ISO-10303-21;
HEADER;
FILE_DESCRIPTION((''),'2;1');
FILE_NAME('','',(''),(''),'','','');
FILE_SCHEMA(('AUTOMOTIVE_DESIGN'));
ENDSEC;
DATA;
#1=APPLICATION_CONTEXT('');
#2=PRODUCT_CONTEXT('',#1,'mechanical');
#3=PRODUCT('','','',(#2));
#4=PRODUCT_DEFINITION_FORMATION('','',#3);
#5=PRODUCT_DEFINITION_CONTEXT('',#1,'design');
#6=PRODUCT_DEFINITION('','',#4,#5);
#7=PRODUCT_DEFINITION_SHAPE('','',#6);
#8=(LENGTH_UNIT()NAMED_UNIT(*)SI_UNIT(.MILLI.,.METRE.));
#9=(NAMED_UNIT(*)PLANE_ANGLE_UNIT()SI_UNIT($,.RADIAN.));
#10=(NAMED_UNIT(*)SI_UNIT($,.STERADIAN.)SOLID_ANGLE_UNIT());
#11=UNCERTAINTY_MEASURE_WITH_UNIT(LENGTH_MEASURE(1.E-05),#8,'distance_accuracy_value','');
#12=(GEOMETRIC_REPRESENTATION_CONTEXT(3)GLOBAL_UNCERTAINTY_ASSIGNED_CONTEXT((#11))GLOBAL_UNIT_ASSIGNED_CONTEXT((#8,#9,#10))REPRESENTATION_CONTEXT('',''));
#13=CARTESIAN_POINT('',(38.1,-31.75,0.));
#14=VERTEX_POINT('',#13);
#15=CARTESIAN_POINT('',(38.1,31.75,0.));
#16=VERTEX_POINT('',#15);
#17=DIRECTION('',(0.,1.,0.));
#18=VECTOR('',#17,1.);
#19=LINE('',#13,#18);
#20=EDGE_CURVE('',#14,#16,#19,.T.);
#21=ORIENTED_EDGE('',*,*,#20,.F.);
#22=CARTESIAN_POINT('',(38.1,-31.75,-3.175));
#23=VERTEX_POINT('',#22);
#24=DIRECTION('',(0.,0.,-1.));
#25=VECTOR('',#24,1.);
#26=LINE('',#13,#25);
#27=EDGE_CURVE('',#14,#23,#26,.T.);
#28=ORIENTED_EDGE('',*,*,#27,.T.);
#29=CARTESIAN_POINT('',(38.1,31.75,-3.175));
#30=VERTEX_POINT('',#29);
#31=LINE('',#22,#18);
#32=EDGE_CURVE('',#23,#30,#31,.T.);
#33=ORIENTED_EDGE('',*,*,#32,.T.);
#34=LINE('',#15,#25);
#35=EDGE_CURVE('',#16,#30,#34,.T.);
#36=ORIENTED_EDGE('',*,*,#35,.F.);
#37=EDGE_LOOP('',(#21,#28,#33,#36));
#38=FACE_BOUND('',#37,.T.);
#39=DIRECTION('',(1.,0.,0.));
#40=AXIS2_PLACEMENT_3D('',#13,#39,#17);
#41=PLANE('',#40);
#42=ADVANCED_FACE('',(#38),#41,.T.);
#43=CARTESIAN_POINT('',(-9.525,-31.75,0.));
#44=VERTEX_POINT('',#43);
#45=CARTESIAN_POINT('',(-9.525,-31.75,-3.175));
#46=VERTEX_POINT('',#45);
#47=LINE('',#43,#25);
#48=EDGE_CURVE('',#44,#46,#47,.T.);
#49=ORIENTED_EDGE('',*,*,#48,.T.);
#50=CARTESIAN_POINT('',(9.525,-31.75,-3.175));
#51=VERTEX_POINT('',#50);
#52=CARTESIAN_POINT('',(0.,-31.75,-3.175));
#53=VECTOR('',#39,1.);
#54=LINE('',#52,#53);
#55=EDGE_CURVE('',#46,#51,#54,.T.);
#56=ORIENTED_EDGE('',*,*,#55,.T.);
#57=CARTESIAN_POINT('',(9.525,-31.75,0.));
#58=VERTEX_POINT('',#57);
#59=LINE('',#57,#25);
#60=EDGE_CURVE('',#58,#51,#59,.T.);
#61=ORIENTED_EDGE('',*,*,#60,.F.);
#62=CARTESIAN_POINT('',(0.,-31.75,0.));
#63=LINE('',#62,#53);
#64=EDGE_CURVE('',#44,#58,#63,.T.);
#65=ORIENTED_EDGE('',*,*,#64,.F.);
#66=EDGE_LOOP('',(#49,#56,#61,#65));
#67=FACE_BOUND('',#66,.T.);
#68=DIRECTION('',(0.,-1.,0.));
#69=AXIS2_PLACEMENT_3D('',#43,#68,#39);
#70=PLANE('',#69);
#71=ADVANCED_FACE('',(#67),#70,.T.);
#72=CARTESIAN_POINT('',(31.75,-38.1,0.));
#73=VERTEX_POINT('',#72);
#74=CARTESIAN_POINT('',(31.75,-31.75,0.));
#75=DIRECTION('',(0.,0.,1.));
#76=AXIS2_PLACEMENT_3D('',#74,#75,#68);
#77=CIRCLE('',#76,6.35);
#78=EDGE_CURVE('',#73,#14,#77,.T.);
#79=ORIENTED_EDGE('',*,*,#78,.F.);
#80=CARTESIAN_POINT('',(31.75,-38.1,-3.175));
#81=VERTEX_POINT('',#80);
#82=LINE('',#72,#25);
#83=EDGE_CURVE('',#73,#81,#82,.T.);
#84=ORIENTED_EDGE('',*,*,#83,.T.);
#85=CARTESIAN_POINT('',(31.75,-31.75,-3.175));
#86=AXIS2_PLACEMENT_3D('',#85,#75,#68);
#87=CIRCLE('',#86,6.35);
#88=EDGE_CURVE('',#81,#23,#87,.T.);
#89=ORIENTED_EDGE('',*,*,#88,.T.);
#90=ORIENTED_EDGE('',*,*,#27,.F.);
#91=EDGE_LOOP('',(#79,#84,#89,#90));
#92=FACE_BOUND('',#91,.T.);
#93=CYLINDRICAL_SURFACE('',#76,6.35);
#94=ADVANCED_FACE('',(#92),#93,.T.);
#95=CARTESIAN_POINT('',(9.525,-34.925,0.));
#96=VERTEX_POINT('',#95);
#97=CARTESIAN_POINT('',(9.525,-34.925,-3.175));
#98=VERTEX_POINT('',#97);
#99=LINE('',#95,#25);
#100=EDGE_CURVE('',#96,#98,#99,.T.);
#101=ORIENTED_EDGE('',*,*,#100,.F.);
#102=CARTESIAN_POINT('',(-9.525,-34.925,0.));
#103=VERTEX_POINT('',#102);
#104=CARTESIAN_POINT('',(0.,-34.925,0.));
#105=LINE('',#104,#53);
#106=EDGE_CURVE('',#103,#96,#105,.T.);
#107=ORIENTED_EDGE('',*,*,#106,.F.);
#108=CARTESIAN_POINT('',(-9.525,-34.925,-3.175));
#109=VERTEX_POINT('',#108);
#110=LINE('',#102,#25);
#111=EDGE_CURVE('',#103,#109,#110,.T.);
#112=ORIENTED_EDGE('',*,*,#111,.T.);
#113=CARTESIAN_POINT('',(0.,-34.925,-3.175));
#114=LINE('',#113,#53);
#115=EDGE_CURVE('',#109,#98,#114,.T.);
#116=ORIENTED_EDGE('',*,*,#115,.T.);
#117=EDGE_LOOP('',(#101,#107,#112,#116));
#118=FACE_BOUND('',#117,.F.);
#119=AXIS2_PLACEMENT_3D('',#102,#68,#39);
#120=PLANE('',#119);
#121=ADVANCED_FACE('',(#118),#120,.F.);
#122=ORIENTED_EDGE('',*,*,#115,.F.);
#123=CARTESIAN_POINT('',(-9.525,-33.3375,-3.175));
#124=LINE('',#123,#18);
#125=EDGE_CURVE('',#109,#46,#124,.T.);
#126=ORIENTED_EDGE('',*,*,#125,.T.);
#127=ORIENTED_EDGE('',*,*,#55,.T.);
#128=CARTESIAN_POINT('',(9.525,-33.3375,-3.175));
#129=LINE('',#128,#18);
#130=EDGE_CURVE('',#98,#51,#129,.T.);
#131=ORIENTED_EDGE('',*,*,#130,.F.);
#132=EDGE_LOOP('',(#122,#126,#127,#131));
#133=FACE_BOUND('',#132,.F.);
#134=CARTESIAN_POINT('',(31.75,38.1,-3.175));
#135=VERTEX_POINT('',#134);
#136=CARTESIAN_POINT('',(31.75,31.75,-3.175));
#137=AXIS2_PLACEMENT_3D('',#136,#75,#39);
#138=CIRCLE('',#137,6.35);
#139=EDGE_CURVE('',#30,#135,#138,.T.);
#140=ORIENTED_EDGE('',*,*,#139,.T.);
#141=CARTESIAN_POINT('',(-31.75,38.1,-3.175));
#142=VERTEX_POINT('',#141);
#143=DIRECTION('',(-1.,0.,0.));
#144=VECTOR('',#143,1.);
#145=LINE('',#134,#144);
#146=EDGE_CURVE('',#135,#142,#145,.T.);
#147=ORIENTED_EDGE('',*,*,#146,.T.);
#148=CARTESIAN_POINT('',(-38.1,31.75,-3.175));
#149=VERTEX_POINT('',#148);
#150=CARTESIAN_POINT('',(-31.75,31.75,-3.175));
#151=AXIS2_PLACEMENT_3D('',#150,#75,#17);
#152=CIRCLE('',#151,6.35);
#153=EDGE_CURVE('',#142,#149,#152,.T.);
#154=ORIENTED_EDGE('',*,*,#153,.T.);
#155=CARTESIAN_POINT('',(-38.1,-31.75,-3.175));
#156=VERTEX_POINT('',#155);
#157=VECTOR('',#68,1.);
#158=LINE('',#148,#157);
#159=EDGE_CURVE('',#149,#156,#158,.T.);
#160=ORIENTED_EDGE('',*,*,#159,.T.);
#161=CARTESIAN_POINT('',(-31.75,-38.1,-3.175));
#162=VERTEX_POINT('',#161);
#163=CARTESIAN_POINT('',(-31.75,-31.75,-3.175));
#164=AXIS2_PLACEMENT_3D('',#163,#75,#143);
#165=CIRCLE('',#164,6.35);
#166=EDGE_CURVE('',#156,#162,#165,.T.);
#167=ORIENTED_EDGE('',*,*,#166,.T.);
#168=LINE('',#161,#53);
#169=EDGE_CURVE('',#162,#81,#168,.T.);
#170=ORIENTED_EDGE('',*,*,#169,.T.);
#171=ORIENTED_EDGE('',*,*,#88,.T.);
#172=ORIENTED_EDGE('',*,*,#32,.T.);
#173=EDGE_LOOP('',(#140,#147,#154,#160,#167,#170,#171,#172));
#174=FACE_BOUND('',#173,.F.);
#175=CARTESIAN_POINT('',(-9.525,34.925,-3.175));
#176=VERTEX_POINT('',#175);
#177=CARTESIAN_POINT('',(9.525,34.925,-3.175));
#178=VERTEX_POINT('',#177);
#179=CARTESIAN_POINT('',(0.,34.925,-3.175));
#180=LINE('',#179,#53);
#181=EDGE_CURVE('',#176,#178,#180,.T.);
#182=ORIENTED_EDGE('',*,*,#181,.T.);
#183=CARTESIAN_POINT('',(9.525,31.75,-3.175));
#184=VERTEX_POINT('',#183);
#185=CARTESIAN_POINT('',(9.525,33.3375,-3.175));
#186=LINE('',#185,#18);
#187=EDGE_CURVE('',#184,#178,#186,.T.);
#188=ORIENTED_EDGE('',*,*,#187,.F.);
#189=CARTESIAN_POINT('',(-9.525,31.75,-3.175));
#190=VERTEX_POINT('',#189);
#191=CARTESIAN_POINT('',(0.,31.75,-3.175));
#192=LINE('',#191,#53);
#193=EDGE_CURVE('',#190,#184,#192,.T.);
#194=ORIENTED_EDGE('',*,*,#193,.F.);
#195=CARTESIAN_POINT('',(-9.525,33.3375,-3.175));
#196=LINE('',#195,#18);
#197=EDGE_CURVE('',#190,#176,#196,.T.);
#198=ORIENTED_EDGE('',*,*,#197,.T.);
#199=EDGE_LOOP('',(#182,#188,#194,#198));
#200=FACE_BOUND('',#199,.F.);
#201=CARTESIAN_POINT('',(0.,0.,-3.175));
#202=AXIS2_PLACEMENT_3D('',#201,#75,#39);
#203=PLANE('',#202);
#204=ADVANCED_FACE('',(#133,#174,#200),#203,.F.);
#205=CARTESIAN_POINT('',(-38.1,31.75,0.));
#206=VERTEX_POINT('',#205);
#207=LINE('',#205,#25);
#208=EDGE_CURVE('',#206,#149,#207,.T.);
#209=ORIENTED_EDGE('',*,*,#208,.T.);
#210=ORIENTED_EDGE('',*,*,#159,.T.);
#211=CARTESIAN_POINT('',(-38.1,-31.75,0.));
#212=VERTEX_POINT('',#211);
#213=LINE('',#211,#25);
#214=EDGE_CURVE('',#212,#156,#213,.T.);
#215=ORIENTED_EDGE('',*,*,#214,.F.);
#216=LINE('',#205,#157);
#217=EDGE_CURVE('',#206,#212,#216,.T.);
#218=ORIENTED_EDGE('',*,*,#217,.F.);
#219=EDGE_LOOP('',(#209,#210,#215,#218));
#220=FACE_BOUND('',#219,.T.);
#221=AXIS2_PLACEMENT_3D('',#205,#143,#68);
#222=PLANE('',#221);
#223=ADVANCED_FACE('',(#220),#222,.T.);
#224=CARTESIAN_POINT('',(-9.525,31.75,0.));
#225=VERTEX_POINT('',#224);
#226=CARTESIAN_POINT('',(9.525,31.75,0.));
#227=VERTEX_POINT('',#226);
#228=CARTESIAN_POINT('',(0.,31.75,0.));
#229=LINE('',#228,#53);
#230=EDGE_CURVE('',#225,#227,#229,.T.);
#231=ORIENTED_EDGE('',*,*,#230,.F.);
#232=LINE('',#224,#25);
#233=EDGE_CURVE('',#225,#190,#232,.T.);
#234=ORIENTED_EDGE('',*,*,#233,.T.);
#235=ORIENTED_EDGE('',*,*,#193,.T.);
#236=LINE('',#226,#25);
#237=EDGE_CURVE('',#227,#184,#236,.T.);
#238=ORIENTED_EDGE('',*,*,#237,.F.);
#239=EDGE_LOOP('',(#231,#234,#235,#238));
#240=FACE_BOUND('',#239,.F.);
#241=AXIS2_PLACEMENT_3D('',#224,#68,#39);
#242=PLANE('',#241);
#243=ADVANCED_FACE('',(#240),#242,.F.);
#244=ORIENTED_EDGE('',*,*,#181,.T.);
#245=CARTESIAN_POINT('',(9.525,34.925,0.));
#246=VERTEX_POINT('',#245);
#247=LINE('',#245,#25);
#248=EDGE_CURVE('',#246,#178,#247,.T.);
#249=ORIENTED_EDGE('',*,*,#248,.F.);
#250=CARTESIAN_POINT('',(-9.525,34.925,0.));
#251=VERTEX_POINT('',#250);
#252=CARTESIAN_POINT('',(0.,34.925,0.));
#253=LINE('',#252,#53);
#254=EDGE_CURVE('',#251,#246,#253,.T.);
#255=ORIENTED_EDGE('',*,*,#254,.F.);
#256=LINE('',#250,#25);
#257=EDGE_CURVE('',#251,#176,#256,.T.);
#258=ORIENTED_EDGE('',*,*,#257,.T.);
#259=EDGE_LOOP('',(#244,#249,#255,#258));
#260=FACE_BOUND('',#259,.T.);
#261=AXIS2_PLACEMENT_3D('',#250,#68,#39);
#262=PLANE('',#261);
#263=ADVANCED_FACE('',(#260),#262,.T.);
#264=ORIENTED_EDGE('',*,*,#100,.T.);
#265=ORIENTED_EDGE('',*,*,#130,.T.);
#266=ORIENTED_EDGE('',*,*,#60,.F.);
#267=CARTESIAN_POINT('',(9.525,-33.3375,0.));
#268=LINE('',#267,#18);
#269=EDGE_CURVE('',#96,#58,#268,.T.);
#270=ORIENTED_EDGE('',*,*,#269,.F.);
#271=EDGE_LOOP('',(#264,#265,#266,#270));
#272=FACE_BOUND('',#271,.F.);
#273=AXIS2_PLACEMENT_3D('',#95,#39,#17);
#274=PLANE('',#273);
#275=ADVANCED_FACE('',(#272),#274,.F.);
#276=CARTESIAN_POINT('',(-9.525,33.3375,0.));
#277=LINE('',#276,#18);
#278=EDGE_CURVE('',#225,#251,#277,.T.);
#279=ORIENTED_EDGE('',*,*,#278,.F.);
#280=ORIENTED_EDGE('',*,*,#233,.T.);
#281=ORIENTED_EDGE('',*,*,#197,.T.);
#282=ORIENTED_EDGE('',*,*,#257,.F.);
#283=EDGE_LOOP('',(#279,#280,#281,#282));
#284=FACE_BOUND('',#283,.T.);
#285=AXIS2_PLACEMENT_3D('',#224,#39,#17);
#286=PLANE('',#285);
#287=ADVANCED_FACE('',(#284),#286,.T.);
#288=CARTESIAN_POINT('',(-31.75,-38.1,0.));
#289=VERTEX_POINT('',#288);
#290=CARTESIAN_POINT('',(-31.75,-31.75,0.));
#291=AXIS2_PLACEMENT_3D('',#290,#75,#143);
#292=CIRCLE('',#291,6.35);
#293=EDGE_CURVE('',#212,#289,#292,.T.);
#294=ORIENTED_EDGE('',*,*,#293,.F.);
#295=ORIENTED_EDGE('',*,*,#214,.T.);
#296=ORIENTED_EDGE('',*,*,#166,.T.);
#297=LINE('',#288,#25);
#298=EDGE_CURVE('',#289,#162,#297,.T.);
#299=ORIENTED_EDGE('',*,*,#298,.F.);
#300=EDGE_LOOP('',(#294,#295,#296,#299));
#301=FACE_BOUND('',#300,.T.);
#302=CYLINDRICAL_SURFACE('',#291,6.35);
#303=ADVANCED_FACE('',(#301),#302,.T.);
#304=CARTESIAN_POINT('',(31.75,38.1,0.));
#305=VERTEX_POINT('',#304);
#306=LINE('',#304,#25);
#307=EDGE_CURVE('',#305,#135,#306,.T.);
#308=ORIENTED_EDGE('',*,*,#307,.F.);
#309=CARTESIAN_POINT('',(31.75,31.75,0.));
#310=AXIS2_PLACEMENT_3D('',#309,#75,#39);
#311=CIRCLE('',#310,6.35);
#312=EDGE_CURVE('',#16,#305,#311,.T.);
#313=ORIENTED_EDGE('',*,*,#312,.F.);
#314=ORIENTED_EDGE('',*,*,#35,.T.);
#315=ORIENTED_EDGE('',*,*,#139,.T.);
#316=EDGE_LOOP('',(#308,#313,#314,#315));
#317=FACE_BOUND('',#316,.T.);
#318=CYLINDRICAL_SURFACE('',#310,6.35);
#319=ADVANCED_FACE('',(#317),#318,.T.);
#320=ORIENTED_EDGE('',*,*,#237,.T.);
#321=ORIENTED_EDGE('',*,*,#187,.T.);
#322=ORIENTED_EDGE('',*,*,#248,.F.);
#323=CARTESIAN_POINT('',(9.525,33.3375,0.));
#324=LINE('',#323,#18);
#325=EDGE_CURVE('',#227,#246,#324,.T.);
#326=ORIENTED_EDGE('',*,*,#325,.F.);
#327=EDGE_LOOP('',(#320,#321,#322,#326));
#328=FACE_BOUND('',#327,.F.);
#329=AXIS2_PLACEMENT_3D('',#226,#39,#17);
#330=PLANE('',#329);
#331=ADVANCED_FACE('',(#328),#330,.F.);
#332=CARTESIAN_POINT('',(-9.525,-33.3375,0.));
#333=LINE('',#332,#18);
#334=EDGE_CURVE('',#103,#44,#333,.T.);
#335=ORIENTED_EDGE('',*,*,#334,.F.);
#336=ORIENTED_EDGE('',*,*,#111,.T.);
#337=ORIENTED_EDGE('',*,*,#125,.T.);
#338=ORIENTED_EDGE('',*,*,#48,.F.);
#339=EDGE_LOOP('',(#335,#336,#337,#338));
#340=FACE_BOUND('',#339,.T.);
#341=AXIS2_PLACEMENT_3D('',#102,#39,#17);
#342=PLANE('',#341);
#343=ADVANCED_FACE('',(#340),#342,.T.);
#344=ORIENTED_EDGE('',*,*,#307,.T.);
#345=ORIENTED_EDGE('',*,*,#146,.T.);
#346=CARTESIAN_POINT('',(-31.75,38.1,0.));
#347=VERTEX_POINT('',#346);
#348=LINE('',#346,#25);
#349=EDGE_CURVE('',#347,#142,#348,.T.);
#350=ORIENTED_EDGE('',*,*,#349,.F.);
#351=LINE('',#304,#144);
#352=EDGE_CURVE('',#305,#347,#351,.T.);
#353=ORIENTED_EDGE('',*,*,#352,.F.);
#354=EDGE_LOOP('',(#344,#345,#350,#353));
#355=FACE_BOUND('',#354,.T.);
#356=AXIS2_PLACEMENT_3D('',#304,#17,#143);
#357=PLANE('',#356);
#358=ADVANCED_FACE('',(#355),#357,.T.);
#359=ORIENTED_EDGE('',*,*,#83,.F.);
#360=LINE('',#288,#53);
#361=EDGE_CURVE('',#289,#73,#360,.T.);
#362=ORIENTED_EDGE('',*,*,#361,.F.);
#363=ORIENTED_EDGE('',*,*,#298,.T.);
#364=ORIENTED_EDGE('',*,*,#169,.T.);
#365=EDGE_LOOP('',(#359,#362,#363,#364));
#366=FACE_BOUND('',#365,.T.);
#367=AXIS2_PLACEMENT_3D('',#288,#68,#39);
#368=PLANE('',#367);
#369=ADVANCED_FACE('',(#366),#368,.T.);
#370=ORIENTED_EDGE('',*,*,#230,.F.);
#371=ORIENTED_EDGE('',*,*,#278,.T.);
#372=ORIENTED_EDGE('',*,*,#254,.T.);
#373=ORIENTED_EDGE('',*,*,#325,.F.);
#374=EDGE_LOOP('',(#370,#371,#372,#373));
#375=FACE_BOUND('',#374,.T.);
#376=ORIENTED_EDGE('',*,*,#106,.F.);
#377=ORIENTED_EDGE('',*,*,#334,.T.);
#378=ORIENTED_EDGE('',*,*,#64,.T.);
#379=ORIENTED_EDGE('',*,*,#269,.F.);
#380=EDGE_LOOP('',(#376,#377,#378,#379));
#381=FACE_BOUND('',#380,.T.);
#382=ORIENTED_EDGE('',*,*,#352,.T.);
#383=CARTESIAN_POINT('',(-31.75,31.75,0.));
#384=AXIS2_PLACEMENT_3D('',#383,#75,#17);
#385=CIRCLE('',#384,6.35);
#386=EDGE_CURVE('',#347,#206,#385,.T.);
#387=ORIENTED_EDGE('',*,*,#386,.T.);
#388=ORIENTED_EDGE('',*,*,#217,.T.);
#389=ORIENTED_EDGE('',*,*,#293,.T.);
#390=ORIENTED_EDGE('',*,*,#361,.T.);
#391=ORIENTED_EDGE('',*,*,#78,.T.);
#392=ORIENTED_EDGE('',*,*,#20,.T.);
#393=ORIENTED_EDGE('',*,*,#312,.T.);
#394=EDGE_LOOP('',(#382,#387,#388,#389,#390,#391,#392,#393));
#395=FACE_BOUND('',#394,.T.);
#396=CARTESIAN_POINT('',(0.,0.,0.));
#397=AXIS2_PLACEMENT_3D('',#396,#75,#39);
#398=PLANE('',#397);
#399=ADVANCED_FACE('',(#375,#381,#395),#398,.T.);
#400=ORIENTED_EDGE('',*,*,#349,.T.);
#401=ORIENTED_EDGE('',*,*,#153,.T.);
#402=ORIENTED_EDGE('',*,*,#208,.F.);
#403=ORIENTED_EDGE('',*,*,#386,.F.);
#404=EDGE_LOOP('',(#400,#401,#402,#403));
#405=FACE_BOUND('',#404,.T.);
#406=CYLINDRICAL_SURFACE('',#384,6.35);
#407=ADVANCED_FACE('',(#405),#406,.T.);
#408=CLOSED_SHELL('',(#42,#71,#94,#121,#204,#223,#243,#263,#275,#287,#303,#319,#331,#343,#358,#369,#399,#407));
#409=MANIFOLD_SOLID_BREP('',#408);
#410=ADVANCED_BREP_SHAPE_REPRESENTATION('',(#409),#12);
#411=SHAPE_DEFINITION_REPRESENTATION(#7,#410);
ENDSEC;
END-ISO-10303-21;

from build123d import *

# Parameters (mm, degrees)
F0_W     = 19.05
F0_H     = 3.175
F1_DEPTH = 3.175


# Not quite as in the source:
# - a length typed as a fraction of an inch, garbled in the dataset ("3 / 203.2 mm" for 3/8 in), is restored


with BuildPart() as f1:
    # F0 (on Top) → F1 (new body)
    with BuildSketch(Plane.XY):
        with BuildLine():
            Line((31.75, 38.1), (-31.75, 38.1))
            ThreePointArc((-31.75, 38.1), (-36.2401280605, 36.2401280605), (-38.1, 31.75))
            Line((-38.1, 31.75), (-38.1, -31.75))
            ThreePointArc((-38.1, -31.75), (-36.2401280605, -36.2401280605), (-31.75, -38.1))
            Line((-31.75, -38.1), (31.75, -38.1))
            ThreePointArc((31.75, -38.1), (36.2401280605, -36.2401280605), (38.1, -31.75))
            Line((38.1, -31.75), (38.1, 31.75))
            ThreePointArc((38.1, 31.75), (36.2401280605, 36.2401280605), (31.75, 38.1))
        make_face()
        with Locations((0, -33.3375)):
            Rectangle(F0_W, F0_H, mode=Mode.SUBTRACT)
        with Locations((0, 33.3375)):
            Rectangle(F0_W, F0_H, mode=Mode.SUBTRACT)
    extrude(amount=-F1_DEPTH)


solid = f1.part
